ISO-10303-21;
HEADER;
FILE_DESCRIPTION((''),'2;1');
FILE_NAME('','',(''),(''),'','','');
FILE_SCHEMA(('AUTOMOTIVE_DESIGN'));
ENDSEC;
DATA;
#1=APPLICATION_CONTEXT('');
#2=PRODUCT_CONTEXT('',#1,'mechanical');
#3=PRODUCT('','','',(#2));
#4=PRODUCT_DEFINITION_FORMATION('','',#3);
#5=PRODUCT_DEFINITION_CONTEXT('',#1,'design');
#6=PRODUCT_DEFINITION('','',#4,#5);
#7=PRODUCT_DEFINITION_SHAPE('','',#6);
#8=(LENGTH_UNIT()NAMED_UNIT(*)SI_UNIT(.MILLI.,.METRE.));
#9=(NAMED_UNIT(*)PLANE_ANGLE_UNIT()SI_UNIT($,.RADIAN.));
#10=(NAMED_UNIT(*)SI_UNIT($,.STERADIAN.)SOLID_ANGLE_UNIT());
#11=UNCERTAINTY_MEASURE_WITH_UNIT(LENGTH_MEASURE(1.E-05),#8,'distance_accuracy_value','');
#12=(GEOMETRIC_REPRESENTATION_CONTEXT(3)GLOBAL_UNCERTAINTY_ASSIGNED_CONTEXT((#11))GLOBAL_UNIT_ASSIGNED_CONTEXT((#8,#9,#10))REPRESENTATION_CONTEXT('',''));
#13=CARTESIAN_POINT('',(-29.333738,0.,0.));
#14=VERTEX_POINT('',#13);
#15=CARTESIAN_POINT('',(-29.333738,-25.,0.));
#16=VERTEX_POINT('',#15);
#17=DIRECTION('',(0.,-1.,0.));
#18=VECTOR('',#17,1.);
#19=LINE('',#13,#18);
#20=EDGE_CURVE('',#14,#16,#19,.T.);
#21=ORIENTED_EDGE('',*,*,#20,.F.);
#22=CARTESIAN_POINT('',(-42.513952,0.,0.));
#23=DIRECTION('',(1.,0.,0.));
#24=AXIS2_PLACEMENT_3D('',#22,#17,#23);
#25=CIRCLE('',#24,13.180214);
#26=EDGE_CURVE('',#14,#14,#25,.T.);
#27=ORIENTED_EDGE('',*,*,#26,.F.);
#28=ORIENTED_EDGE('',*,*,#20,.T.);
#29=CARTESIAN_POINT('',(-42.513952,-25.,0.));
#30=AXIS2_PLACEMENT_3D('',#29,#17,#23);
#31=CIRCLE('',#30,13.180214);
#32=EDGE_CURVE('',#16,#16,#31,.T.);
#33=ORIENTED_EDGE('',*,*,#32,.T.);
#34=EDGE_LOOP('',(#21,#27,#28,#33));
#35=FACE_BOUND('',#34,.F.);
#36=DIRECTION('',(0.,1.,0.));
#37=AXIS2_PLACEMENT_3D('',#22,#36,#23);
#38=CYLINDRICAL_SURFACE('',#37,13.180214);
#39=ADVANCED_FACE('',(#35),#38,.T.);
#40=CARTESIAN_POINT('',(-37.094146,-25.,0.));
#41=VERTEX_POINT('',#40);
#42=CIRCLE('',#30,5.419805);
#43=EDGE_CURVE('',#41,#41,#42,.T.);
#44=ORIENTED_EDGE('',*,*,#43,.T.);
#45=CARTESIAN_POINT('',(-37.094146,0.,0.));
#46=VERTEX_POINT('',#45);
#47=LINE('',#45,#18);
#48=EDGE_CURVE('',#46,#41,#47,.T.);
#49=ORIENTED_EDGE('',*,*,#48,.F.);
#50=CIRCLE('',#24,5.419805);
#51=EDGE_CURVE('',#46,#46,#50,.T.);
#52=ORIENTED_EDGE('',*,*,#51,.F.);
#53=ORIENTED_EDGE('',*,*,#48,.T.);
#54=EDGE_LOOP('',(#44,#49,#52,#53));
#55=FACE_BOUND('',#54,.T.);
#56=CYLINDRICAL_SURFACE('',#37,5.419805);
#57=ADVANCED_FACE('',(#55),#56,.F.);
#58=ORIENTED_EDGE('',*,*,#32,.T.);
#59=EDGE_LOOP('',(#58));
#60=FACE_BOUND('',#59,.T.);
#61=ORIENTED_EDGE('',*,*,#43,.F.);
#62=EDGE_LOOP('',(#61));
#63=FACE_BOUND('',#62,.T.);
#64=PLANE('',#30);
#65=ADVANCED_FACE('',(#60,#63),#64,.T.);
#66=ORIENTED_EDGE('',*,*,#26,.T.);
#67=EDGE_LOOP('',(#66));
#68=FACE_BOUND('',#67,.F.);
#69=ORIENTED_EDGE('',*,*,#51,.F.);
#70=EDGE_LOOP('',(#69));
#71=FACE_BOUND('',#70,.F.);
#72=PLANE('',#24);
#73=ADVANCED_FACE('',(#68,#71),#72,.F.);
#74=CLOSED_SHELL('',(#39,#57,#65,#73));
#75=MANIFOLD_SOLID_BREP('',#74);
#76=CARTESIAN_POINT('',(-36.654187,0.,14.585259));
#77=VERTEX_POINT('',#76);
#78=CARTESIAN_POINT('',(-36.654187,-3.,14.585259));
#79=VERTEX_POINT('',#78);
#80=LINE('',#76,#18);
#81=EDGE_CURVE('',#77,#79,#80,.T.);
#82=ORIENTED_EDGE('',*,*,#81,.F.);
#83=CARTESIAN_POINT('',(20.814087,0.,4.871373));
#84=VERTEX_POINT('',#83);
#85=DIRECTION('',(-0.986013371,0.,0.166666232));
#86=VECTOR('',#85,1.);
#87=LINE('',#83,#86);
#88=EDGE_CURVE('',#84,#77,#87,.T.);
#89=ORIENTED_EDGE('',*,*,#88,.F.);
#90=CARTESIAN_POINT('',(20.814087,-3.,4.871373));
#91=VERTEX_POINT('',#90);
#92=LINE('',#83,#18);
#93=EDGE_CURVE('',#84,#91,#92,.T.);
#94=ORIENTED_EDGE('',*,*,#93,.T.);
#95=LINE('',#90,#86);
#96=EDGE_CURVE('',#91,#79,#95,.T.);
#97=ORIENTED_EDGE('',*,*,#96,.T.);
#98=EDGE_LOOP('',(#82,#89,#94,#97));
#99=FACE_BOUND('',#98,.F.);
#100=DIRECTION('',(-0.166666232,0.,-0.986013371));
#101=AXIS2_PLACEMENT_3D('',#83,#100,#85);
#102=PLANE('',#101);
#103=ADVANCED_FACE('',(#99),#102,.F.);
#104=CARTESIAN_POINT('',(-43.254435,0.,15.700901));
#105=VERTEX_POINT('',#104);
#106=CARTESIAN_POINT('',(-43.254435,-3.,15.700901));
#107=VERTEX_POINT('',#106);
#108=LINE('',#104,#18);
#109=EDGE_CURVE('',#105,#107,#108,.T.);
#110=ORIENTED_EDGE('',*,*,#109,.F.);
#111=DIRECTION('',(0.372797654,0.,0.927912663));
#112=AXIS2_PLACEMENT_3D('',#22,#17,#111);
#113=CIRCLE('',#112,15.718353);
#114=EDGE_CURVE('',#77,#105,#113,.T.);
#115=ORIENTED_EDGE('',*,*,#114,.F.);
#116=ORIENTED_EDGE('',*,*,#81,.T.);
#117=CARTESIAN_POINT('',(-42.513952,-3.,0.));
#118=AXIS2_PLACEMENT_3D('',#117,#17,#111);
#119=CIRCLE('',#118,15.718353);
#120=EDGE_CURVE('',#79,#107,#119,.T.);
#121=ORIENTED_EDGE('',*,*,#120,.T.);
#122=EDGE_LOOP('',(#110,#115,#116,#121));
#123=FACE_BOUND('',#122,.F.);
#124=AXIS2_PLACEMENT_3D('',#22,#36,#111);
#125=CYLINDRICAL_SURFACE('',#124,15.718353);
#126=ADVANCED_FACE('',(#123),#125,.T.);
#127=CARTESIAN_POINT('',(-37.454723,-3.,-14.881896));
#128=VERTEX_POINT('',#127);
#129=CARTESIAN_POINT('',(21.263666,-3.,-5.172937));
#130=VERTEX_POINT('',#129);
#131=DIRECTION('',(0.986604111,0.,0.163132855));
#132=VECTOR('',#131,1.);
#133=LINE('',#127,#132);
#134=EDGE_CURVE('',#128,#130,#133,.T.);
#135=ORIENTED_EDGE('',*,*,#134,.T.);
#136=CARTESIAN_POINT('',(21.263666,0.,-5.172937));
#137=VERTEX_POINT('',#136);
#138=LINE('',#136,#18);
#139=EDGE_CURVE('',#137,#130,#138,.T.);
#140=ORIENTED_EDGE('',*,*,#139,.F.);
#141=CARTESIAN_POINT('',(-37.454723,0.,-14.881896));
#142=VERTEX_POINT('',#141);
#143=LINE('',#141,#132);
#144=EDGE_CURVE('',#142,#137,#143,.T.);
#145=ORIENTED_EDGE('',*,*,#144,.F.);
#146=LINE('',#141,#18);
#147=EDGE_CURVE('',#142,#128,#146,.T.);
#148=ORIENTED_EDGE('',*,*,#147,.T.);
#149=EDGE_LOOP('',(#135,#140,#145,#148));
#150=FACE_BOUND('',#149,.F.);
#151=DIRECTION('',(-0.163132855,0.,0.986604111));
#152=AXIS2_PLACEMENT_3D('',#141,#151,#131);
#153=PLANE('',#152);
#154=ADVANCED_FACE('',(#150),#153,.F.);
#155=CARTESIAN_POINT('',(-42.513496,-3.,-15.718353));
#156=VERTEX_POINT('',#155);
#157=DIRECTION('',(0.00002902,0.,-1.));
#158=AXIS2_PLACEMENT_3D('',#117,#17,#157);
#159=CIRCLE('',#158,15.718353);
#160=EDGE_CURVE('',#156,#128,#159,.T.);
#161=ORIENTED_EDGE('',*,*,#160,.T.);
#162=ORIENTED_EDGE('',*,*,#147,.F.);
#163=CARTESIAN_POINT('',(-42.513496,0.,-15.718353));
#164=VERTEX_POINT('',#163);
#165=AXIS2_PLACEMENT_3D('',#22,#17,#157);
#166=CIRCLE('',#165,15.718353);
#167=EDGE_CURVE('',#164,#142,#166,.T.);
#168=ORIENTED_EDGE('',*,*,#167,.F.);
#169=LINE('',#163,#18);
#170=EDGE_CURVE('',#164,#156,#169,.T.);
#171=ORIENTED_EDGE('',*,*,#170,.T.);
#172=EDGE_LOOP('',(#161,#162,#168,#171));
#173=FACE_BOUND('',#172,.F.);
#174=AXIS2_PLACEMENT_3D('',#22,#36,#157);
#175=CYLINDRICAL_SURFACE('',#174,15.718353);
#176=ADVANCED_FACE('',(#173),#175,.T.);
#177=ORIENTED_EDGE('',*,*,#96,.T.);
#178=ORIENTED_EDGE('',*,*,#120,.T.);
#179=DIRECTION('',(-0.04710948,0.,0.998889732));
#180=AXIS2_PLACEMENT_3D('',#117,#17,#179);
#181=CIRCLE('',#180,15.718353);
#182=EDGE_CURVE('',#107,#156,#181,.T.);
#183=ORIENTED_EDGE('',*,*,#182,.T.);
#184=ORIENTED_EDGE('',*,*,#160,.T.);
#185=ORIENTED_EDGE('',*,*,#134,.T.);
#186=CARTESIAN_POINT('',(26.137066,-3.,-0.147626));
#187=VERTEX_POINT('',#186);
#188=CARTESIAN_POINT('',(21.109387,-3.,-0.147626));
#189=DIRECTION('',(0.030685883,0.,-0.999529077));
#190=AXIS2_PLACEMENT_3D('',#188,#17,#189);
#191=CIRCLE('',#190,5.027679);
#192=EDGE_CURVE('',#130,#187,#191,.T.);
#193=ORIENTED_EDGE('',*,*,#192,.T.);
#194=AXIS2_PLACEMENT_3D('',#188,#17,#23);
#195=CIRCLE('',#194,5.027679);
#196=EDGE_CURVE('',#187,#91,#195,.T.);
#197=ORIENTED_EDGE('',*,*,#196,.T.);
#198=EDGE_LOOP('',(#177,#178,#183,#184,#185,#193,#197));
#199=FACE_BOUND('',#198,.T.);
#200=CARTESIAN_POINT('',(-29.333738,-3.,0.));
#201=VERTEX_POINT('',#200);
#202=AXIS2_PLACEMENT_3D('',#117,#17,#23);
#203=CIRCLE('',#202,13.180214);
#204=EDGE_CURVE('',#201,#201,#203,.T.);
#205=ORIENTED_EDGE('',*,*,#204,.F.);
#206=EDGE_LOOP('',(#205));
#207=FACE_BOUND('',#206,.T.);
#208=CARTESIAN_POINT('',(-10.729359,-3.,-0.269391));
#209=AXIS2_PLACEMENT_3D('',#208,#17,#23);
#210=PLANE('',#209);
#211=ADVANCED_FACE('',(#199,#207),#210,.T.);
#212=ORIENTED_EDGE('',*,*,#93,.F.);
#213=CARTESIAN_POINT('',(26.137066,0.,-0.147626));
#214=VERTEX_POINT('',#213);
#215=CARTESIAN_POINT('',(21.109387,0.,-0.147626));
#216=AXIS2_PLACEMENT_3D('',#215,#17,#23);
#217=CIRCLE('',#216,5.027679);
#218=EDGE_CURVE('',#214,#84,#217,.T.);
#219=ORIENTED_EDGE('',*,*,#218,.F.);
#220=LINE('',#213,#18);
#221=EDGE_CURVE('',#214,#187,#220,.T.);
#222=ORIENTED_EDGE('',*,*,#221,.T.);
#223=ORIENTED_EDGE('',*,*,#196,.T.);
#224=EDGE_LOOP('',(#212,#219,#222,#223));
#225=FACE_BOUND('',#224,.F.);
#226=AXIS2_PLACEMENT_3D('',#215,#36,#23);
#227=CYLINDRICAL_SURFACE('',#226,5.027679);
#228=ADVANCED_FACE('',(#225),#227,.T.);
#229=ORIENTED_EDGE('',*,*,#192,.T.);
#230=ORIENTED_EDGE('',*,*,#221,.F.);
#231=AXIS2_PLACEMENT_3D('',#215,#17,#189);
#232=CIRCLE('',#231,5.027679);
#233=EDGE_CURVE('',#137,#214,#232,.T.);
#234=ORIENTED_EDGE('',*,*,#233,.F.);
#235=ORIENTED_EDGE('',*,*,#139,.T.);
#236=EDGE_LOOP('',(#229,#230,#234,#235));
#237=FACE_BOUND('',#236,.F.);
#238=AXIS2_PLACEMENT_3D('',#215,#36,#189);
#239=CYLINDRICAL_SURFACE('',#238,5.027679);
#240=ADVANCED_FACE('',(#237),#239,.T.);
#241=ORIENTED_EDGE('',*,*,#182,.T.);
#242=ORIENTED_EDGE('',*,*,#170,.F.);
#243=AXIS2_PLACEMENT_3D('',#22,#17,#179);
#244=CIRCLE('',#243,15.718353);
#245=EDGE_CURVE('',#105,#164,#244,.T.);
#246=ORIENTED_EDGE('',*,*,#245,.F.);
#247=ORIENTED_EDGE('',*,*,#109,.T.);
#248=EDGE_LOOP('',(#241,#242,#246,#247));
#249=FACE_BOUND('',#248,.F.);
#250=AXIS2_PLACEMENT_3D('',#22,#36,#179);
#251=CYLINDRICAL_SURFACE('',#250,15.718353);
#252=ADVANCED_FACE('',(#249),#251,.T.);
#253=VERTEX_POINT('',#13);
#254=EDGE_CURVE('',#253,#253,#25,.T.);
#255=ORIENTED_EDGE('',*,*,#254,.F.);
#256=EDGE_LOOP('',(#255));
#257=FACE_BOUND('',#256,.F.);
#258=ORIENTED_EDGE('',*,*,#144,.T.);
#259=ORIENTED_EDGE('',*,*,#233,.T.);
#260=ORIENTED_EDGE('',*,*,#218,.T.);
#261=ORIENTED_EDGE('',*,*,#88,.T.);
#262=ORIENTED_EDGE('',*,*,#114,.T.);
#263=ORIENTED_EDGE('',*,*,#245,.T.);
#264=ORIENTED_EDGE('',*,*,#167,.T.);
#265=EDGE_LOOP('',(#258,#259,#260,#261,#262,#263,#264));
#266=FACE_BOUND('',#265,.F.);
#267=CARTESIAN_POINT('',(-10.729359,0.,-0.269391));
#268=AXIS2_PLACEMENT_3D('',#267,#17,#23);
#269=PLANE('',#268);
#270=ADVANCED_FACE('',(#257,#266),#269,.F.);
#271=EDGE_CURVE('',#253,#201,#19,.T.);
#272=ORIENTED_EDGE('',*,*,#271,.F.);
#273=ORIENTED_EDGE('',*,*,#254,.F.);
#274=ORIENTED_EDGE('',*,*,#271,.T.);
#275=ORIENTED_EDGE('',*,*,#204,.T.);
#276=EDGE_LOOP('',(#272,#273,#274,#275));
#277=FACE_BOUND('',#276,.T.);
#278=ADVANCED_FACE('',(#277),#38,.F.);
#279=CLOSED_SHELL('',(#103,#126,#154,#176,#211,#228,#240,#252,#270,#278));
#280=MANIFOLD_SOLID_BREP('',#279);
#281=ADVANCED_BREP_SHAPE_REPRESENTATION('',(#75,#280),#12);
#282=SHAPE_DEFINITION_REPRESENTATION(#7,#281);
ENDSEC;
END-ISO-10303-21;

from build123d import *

# Parameters (mm, degrees)
F0_R     = 13.1802136703
F0_R_2   = 5.4198051915
F1_DEPTH = 25
F2_DEPTH = 3


# Not quite as in the source:
# - the program builds the solid bodies; features that only make, move or delete a surface that nothing else refers to are left out


with BuildPart() as f1:
    # F0 (on Front) → F1 (new body)
    with BuildSketch(Plane.XZ):
        with Locations((-42.5139516592, 0)):
            Circle(F0_R)
        with Locations((-42.5139516592, 0)):
            Circle(F0_R_2, mode=Mode.SUBTRACT)
    extrude(amount=F1_DEPTH)


with BuildPart() as f2:
    # F0 (on Front) → F2 (new body)
    with BuildSketch(Plane.XZ):
        with BuildLine():
            Line((20.8140872557, 4.8713734487), (-36.6541866123, 14.585258601))
            ThreePointArc((-36.6541866123, 14.585258601), (-29.4914236938, 8.8022940336), (-26.7955988555, 0))
            ThreePointArc((-26.7955988555, 0), (-29.7352710301, -9.1527010353), (-37.454722911, -14.8818956903))
            Line((-37.454722911, -14.8818956903), (21.2636660443, -5.1729371042))
            ThreePointArc((21.2636660443, -5.1729371042), (16.0867370449, -0.3724373523), (20.8140872557, 4.8713734487))
        make_face()
        with BuildLine():
            Line((-37.454722911, -14.8818956903), (-42.5134955187, -15.7183527971))
            ThreePointArc((-42.5134955187, -15.7183527971), (-39.9497718846, -15.5077914916), (-37.454722911, -14.8818956903))
        make_face()
        with BuildLine():
            ThreePointArc((26.1370662263, -0.1476258039), (24.5585090431, 3.5103947885), (20.8140872557, 4.8713734487))
            ThreePointArc((20.8140872557, 4.8713734487), (16.0867370449, -0.3724373523), (21.2636660443, -5.1729371042))
            ThreePointArc((21.2636660443, -5.1729371042), (24.7186267901, -3.6477609084), (26.1370662263, -0.1476258039))
        make_face()
        with BuildLine():
            ThreePointArc((-36.6541866123, 14.585258601), (-39.8942330305, 15.4985060302), (-43.2544350848, 15.7009012212))
            Line((-43.2544350848, 15.7009012212), (-36.6541866123, 14.585258601))
        make_face()
        with BuildLine():
            Line((-36.6541866123, 14.585258601), (-43.2544350848, 15.7009012212))
            ThreePointArc((-43.2544350848, 15.7009012212), (-58.2279355864, -0.3705725294), (-42.5134955187, -15.7183527971))
            Line((-42.5134955187, -15.7183527971), (-37.454722911, -14.8818956903))
            ThreePointArc((-37.454722911, -14.8818956903), (-29.7352710301, -9.1527010353), (-26.7955988555, 0))
            ThreePointArc((-26.7955988555, 0), (-29.4914236938, 8.8022940336), (-36.6541866123, 14.585258601))
        make_face()
        with Locations((-42.5139516592, 0)):
            Circle(F0_R, mode=Mode.SUBTRACT)
    extrude(amount=F2_DEPTH)


solid = Compound([f1.part, f2.part])
